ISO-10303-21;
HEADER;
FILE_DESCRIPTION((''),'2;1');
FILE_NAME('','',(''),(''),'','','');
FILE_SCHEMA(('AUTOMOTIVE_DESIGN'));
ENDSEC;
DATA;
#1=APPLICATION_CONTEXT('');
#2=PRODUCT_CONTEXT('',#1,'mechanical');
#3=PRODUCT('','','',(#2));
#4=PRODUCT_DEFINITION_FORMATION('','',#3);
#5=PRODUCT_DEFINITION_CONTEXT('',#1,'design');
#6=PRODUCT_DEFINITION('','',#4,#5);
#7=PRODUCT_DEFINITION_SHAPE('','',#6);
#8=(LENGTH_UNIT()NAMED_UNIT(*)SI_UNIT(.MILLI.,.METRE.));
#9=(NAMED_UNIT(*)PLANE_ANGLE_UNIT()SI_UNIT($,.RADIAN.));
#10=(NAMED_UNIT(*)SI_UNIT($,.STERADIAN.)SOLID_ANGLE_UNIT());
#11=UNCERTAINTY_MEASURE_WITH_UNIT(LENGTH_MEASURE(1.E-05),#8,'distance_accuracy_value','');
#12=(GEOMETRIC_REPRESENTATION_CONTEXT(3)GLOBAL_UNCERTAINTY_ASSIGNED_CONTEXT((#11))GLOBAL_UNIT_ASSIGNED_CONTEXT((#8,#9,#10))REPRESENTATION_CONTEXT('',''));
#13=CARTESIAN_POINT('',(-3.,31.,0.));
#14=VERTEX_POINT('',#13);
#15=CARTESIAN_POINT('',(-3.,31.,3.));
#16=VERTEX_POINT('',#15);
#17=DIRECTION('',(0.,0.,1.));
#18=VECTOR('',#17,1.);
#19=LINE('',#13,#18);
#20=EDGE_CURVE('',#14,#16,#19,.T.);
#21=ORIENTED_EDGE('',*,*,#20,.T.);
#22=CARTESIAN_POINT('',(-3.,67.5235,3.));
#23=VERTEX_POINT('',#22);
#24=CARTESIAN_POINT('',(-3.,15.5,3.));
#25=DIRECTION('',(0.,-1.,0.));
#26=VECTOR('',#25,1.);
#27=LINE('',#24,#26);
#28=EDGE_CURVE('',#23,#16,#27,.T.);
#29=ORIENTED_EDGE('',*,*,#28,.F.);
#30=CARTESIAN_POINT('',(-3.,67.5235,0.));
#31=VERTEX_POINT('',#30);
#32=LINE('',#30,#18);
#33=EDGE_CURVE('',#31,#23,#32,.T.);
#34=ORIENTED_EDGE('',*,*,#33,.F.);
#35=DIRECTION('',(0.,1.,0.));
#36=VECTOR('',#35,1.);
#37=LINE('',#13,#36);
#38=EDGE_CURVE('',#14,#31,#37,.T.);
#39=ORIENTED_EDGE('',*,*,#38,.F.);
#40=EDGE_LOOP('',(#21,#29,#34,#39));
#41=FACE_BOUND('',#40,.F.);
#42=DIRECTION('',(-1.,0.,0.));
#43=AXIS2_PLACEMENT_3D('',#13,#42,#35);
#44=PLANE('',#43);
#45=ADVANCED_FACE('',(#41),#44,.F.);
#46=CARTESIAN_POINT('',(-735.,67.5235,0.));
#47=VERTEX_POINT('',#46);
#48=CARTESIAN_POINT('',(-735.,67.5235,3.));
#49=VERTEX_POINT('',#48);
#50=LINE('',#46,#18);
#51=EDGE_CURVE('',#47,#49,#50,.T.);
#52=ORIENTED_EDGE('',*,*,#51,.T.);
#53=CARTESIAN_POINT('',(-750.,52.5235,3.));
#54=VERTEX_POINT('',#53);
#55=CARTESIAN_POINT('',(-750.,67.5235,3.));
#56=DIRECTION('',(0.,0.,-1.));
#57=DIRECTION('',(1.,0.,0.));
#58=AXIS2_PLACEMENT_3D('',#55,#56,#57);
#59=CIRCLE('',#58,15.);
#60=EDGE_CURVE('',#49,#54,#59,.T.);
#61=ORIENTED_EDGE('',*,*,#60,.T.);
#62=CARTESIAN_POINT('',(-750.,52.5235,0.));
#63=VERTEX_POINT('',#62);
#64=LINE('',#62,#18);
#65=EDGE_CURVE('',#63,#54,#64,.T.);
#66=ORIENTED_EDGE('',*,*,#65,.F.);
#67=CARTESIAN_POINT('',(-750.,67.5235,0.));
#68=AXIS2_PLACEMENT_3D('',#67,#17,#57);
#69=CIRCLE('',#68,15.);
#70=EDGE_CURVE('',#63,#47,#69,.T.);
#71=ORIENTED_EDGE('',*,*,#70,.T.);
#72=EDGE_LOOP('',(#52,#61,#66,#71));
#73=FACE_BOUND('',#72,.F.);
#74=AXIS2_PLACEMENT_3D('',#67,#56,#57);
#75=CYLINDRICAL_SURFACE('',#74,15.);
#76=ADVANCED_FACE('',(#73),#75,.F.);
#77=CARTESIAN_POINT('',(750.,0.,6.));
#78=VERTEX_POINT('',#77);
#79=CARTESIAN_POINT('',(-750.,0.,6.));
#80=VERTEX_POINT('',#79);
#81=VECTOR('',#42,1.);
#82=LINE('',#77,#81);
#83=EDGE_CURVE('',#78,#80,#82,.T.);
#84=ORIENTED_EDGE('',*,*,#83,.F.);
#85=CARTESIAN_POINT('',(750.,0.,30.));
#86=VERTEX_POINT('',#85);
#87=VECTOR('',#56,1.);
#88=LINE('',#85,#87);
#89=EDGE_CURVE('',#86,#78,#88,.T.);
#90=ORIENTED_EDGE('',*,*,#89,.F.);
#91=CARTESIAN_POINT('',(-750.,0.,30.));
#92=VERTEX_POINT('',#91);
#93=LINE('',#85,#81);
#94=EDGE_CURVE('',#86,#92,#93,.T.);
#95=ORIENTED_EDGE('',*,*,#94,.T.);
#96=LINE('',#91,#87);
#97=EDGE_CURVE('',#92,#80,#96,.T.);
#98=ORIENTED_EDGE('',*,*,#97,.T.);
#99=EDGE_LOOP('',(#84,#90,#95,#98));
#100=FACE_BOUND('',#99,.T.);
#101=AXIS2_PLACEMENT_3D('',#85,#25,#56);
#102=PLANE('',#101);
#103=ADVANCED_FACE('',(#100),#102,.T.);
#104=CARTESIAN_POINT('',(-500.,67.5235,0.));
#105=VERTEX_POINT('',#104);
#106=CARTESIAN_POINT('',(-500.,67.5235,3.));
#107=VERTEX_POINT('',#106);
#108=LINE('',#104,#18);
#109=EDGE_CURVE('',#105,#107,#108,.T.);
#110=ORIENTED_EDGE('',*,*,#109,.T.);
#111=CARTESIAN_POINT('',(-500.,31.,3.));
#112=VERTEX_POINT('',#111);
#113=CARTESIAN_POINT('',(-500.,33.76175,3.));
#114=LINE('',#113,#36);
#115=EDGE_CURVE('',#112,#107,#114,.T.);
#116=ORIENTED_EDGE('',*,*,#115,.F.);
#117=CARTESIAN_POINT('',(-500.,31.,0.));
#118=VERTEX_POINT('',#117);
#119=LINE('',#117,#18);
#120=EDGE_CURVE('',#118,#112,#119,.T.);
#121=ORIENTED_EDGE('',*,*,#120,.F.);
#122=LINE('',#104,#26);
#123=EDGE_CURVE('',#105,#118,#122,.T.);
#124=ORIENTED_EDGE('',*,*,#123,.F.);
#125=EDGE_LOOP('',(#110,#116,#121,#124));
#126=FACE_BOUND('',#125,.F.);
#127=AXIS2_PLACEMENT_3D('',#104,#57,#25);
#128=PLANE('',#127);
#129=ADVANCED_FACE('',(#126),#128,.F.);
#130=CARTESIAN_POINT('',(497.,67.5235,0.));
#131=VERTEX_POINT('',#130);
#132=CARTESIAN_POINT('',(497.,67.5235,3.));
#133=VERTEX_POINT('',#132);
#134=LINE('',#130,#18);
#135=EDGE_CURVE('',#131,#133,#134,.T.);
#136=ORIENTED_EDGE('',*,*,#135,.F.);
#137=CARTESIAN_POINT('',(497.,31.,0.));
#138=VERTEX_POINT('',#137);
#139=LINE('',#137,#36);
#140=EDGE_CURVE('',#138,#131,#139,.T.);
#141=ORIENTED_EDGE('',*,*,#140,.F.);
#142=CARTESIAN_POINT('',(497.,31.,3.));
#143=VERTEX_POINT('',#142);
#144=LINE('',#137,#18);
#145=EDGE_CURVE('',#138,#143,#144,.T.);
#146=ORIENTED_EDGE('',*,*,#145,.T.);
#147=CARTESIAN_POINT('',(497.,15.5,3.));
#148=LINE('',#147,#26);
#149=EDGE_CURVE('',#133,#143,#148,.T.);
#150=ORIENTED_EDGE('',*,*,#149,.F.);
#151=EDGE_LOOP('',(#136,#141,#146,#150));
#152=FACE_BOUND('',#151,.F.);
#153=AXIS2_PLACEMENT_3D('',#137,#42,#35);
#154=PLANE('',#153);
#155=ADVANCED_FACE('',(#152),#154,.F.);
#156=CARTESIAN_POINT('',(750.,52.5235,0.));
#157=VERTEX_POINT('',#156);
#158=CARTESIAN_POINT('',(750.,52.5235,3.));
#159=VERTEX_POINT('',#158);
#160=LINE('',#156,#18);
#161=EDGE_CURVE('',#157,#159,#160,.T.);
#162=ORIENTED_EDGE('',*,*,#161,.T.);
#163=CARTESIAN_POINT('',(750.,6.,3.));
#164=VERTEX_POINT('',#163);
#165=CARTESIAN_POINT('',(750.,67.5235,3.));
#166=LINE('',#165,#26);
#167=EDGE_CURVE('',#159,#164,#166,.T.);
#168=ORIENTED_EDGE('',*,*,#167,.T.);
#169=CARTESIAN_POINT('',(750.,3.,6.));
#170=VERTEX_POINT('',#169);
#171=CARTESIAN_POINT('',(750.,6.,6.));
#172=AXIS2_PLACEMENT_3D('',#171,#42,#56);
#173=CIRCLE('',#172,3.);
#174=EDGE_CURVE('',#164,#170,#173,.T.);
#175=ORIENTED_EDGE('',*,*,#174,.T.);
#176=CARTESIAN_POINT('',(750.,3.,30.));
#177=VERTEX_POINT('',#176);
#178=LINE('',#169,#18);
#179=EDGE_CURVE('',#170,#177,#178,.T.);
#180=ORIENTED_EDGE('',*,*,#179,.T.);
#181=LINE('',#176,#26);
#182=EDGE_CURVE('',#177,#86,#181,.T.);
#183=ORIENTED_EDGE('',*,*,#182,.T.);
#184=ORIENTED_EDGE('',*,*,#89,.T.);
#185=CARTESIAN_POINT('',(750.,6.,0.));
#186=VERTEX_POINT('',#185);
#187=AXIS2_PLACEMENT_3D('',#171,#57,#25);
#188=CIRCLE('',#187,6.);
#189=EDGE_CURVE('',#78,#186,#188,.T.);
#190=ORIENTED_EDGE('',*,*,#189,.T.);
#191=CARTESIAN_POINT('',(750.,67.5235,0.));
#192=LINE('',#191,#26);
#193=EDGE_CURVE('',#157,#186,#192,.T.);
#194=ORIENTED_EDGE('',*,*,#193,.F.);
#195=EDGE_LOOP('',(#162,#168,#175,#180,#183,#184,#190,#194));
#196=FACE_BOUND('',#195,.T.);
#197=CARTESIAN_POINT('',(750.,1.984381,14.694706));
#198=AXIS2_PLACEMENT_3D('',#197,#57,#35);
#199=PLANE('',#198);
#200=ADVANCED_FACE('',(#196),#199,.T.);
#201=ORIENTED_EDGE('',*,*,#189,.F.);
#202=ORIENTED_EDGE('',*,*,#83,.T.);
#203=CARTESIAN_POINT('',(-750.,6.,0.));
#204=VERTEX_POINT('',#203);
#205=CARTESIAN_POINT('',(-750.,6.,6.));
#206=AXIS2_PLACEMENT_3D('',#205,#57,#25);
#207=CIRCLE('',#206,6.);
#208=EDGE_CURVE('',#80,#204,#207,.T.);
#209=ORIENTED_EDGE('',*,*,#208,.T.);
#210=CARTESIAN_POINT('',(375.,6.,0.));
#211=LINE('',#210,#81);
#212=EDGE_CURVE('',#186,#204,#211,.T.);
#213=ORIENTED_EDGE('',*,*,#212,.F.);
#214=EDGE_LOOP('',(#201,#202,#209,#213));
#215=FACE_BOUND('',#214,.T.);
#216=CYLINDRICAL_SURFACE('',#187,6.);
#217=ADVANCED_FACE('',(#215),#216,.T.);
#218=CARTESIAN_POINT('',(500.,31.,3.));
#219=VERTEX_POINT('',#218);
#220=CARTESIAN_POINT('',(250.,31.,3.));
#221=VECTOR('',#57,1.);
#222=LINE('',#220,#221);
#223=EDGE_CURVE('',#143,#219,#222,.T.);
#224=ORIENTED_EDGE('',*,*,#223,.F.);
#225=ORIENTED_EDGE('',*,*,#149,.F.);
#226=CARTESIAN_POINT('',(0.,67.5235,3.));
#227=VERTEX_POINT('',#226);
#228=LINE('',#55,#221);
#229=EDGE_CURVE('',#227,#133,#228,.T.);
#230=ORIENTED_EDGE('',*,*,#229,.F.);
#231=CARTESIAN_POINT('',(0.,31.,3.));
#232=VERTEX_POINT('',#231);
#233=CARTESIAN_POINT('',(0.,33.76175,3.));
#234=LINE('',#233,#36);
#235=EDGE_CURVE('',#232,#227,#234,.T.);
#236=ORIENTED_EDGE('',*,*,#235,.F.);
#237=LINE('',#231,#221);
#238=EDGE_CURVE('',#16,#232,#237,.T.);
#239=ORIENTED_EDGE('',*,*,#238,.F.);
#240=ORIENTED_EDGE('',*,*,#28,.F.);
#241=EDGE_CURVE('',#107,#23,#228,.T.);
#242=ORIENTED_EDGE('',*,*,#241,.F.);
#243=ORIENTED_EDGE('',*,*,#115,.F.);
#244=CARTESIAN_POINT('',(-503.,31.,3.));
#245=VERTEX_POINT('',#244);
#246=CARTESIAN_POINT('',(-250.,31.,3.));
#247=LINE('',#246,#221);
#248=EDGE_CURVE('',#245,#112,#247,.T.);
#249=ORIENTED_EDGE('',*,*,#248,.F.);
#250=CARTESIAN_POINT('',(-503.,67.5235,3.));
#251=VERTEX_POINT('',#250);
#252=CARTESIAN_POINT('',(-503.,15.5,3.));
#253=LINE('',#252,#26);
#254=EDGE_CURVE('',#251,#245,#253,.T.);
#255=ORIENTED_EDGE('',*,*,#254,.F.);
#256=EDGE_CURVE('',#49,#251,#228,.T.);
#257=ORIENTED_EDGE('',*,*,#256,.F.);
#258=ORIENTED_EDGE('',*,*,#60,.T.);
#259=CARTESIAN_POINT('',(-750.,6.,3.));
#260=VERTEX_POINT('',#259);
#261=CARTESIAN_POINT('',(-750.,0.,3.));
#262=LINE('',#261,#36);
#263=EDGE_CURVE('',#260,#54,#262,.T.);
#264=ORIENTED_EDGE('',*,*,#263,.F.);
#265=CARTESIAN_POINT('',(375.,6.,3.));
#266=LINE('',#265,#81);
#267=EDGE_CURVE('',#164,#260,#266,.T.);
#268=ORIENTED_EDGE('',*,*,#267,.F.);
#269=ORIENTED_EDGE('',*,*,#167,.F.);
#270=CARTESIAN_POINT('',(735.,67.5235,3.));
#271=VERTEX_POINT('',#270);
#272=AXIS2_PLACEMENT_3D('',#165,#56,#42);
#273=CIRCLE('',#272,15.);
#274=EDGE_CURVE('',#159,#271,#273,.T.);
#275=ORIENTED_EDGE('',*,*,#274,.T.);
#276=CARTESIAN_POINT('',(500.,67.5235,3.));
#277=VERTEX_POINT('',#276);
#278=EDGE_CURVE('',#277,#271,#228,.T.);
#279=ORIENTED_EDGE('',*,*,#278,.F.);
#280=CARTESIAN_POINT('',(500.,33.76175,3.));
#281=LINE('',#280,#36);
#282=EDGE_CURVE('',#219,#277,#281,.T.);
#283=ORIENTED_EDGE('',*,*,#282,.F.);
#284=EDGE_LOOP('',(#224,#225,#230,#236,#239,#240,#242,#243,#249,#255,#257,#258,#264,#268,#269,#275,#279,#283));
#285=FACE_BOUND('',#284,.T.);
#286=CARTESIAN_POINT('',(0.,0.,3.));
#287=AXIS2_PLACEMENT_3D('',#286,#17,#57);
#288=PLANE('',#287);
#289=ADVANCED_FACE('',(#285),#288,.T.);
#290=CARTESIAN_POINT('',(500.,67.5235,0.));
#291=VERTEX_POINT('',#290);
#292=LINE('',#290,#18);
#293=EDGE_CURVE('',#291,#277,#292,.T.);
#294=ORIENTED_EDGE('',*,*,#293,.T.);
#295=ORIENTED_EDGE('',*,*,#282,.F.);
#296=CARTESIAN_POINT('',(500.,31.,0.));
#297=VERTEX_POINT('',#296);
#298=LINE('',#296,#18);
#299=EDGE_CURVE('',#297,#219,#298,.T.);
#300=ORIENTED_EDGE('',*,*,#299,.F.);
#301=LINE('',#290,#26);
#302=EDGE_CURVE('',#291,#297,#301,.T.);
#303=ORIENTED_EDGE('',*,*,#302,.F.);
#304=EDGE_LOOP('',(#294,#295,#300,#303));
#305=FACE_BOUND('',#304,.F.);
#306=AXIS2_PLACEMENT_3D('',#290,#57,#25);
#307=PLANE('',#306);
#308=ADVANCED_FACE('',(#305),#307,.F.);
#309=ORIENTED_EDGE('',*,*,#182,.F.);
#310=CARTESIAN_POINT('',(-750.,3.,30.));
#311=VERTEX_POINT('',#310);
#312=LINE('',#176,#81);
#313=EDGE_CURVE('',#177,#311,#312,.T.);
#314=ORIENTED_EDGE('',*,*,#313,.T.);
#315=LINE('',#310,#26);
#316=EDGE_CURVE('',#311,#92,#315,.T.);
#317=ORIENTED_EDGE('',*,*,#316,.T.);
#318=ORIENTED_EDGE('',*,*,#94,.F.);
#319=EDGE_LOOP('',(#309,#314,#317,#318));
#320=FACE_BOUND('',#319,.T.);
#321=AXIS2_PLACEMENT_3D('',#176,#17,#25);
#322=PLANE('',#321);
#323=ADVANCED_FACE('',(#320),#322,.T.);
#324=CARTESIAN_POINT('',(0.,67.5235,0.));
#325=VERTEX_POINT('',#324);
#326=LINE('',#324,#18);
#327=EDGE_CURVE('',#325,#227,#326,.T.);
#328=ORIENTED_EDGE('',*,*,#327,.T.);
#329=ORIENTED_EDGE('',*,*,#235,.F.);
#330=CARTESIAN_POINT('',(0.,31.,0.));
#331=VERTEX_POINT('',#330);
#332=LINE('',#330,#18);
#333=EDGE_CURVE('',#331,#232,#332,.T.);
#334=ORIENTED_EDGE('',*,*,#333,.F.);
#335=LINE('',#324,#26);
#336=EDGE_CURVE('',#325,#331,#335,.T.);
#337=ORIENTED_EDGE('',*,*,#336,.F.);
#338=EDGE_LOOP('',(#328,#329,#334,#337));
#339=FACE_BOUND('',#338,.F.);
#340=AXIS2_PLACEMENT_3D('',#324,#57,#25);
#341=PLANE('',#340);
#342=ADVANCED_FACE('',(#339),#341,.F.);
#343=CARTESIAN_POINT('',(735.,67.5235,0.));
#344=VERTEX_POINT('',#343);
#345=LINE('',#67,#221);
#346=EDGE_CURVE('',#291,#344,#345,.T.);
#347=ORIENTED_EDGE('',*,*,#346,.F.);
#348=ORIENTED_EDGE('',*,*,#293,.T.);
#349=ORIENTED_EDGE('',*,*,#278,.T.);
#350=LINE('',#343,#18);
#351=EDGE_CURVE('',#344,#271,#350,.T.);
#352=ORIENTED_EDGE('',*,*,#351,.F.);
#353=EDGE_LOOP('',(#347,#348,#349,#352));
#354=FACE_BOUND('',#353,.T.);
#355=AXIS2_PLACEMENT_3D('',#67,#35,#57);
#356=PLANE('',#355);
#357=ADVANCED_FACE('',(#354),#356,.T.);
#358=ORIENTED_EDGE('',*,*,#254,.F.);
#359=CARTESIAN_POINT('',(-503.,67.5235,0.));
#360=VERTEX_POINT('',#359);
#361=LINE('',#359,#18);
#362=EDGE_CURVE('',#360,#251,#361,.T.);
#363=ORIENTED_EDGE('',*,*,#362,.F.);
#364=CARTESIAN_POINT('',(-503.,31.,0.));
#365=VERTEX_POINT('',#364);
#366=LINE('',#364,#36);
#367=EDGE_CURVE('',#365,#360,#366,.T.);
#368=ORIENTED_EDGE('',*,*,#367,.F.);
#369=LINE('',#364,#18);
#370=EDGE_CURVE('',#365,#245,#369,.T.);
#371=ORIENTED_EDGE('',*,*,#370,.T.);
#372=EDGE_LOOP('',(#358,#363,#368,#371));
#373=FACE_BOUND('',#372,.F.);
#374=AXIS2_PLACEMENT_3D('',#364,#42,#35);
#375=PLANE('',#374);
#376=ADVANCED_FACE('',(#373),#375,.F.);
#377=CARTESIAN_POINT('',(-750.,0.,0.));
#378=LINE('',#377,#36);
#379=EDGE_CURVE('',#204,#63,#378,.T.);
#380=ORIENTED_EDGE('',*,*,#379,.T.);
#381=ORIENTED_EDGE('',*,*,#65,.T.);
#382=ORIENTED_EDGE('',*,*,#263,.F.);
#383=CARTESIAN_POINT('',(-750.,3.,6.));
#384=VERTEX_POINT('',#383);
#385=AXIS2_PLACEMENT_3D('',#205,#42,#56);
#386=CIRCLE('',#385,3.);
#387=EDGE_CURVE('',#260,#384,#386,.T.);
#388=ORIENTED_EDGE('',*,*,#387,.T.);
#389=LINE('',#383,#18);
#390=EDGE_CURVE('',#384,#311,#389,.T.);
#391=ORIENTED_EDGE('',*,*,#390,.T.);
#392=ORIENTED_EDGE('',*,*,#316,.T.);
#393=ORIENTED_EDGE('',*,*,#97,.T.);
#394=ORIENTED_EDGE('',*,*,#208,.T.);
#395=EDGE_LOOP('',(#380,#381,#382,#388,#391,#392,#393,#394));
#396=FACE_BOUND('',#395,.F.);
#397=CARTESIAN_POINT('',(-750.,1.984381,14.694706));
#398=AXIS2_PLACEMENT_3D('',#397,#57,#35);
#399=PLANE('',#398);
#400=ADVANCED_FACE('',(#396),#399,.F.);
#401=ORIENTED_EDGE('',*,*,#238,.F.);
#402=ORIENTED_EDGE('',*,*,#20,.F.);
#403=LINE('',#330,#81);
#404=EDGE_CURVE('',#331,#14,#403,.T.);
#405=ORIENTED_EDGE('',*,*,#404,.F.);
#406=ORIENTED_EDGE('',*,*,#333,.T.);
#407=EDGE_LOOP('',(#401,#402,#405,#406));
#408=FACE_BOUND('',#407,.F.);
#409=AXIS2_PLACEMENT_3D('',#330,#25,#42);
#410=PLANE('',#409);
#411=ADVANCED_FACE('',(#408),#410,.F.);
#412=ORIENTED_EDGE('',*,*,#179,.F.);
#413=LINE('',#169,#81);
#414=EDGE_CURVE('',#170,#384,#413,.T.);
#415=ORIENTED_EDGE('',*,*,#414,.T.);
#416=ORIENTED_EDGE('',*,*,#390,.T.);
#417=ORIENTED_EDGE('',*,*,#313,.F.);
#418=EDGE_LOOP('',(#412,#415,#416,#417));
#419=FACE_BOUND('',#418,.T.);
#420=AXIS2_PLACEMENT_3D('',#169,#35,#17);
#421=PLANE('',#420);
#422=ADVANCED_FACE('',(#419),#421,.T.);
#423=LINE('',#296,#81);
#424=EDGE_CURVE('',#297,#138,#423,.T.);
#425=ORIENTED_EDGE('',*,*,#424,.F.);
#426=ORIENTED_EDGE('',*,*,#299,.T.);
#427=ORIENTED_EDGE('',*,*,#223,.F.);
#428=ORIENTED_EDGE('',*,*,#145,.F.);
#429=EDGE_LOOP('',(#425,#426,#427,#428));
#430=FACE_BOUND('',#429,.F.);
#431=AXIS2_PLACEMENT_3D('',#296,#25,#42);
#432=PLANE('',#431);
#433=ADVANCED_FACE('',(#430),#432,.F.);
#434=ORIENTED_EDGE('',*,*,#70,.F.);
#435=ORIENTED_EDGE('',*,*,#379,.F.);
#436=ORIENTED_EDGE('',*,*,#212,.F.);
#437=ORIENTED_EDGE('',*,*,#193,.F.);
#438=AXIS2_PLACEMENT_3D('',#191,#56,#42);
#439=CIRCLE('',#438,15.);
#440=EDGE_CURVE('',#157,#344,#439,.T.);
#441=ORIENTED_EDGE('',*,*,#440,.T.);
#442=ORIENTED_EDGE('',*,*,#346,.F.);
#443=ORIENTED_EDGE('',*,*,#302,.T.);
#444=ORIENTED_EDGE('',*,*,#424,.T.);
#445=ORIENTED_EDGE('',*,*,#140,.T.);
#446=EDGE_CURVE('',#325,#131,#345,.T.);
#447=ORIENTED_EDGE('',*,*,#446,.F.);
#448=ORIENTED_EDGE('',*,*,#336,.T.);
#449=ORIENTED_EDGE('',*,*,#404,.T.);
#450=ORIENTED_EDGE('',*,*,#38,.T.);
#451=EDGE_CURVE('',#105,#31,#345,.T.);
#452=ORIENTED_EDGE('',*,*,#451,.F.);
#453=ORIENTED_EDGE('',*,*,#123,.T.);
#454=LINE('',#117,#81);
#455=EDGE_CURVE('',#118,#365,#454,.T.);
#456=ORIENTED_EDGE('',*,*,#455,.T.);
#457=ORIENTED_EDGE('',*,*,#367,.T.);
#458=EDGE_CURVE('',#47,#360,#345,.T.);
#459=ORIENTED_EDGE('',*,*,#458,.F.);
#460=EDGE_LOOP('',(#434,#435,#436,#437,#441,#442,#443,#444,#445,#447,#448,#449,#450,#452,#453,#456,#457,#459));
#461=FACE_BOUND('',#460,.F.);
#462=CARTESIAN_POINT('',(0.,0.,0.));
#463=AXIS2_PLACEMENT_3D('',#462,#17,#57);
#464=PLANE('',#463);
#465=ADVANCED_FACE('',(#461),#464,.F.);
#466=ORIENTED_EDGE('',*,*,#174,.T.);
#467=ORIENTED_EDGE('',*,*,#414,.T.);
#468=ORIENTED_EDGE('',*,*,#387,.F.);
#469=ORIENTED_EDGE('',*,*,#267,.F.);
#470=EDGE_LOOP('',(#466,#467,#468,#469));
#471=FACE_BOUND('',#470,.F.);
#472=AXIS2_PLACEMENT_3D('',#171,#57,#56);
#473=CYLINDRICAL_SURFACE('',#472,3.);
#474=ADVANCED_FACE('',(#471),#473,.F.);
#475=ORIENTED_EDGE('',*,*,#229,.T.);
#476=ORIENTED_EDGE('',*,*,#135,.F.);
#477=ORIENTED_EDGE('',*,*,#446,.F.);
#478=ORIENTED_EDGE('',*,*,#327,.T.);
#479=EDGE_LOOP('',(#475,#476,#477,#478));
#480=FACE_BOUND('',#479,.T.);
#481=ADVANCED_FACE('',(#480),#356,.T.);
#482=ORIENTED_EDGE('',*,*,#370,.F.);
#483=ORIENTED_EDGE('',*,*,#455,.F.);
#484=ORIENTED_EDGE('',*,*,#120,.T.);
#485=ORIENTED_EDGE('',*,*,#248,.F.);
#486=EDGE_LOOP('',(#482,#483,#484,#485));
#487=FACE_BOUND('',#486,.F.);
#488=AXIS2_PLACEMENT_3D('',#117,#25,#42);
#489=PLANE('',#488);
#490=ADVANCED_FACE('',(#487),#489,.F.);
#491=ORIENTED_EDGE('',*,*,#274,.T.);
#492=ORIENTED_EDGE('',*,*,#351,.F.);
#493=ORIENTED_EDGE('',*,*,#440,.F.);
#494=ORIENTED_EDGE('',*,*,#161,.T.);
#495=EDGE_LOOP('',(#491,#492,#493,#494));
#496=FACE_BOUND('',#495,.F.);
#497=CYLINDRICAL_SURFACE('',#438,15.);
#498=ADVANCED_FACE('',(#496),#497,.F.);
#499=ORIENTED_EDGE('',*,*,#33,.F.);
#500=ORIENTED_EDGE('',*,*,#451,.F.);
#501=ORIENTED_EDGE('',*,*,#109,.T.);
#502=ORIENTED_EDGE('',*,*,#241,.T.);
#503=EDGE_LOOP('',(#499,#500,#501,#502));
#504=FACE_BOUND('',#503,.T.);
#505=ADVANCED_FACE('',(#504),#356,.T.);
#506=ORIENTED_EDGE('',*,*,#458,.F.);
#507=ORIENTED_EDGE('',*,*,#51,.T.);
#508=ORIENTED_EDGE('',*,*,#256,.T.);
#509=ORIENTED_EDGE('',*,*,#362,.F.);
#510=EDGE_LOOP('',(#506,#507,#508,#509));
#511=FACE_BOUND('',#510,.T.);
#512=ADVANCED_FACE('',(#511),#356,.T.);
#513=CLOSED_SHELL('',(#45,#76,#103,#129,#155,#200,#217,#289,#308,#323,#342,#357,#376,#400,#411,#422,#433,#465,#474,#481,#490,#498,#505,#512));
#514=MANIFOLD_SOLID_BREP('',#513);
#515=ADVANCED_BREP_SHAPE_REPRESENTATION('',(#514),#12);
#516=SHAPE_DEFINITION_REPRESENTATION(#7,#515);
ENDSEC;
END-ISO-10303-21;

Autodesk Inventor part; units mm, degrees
ref_plane "YZ Plane" through (0, 0, 0) normal (1, 0, 0) x (0, 1, 0)
ref_plane "XZ Plane" through (0, 0, 0) normal (0, 1, 0) x (-1, 0, 0)
ref_plane "XY Plane" through (0, 0, 0) normal (0, 0, 1) x (1, 0, 0)
sketch "Sketch1" plane through (0, 0, 0) normal (0, 0, 1) x (1, 0, 0)
  line L0 (-750, 67.5235) -> (750, 67.5235)
  line L1 (750, 67.5235) -> (750, 0)
  line L2 (750, 0) -> (-750, 0)
  line L3 (-750, 0) -> (-750, 67.5235)
  point P0 (0, 0)
  point P1 (0, 0)
  dimension "d0" = 1500
  dimension "d1" = 67.5235
extrude "Plate1" add sketch "Sketch1" along normal blind 3
sketch "Sketch2" plane through (750, 3, 0) normal (0, -1, 0) x (1, 0, 0)
  line L0 (-1500, 0) -> (0, 0)
  line L1 (0, 0) -> (0, 30)
  line L2 (0, 30) -> (-1500, 30)
  line L3 (-1500, 30) -> (-1500, 0)
edge flange "Flange1" height 30 angle 90 thickness 3 bend radius 3 thickness toward (0, -1, 0) relief tear relief width 3 relief depth 1.5 edges at (0, 0, 3) wall of the first edge with corners at (-750, 3, 0) (750, 3, 0) (750, 3, 30) (-750, 3, 30)
bend "Bend1"
corner "Corner1"
sketch "Sketch5" plane through (0, 0, 0) normal (0, 0, -1) x (-1, 0, 0)
  line L0 (750, 67.5235) -> (-750, 67.5235) projected
  line L1 (500, 67.5235) -> (500, 31)
  line L2 (500, 31) -> (503, 31)
  line L3 (503, 31) -> (503, 67.5235)
  line L4 (750, 0) -> (-750, 0) projected
  point P0 (0, 0)
  dimension "d18" = 3
  dimension "d19" = 247
  dimension "d20" = 31
extrude "Extrusion1" cut sketch "Sketch5" against normal through all
pattern_linear "Rectangular Pattern1" count 3 spacing 500 along (1, 0, 0) of "Extrusion1"
sketch "Sketch6" plane through (0, 0, 0) normal (0, 0, -1) x (-1, 0, 0)
  line L0 (-750, 67.5235) -> (-750, 6) projected
  circle A0 centre (-750, 67.5235) radius 15
  line L1 (-750, 67.5235) -> (750, 67.5235) projected
  point P0 (0, 0)
  point P1 (-500, 67.5235)
  point P2 (-735, 67.5235)
  point P3 (-750, 52.5235)
  dimension "d24" = 30
extrude "Extrusion2" cut sketch "Sketch6" against normal through all contours L1 A0 L0 picked at (-740.1254, 66.4109)
mirror "Mirror1" about plane through (0, 0, 0) normal (1, 0, 0) of "Extrusion2"
equation "\"d1\" = Стрингер_3"
equation "\"d18\" = Thickness"
equation "\"d2\" = Thickness"
equation "\"d3\" = BendReliefWidth"
equation "\"d4\" = BendReliefDepth"
equation "\"d5\" = MinimumRemnant"
equation "\"d6\" = TransitionRadius"
equation "\"d9\" = BendRadius"
equation "\"d10\" = CornerReliefSize"
equation "\"d11\" = GapSize"
equation "\"d12\" = JacobiRadiusSize"
equation "\"BendRadius\" = Thickness"
equation "\"BendReliefWidth\" = Thickness"
equation "\"BendReliefDepth\" = 0.5 * Thickness"
equation "\"CornerReliefSize\" = 4 * Thickness"
equation "\"MinimumRemnant\" = 2 * Thickness"
equation "\"TransitionRadius\" = BendRadius"
equation "\"JacobiRadiusSize\" = BendRadius"
equation "\"GapSize\" = Thickness"
equation "\"Стрингер_3\" = 67.5235"
equation "\"Thickness\" = 3"
properties part number "МОО 053 стрингер борт 31"
